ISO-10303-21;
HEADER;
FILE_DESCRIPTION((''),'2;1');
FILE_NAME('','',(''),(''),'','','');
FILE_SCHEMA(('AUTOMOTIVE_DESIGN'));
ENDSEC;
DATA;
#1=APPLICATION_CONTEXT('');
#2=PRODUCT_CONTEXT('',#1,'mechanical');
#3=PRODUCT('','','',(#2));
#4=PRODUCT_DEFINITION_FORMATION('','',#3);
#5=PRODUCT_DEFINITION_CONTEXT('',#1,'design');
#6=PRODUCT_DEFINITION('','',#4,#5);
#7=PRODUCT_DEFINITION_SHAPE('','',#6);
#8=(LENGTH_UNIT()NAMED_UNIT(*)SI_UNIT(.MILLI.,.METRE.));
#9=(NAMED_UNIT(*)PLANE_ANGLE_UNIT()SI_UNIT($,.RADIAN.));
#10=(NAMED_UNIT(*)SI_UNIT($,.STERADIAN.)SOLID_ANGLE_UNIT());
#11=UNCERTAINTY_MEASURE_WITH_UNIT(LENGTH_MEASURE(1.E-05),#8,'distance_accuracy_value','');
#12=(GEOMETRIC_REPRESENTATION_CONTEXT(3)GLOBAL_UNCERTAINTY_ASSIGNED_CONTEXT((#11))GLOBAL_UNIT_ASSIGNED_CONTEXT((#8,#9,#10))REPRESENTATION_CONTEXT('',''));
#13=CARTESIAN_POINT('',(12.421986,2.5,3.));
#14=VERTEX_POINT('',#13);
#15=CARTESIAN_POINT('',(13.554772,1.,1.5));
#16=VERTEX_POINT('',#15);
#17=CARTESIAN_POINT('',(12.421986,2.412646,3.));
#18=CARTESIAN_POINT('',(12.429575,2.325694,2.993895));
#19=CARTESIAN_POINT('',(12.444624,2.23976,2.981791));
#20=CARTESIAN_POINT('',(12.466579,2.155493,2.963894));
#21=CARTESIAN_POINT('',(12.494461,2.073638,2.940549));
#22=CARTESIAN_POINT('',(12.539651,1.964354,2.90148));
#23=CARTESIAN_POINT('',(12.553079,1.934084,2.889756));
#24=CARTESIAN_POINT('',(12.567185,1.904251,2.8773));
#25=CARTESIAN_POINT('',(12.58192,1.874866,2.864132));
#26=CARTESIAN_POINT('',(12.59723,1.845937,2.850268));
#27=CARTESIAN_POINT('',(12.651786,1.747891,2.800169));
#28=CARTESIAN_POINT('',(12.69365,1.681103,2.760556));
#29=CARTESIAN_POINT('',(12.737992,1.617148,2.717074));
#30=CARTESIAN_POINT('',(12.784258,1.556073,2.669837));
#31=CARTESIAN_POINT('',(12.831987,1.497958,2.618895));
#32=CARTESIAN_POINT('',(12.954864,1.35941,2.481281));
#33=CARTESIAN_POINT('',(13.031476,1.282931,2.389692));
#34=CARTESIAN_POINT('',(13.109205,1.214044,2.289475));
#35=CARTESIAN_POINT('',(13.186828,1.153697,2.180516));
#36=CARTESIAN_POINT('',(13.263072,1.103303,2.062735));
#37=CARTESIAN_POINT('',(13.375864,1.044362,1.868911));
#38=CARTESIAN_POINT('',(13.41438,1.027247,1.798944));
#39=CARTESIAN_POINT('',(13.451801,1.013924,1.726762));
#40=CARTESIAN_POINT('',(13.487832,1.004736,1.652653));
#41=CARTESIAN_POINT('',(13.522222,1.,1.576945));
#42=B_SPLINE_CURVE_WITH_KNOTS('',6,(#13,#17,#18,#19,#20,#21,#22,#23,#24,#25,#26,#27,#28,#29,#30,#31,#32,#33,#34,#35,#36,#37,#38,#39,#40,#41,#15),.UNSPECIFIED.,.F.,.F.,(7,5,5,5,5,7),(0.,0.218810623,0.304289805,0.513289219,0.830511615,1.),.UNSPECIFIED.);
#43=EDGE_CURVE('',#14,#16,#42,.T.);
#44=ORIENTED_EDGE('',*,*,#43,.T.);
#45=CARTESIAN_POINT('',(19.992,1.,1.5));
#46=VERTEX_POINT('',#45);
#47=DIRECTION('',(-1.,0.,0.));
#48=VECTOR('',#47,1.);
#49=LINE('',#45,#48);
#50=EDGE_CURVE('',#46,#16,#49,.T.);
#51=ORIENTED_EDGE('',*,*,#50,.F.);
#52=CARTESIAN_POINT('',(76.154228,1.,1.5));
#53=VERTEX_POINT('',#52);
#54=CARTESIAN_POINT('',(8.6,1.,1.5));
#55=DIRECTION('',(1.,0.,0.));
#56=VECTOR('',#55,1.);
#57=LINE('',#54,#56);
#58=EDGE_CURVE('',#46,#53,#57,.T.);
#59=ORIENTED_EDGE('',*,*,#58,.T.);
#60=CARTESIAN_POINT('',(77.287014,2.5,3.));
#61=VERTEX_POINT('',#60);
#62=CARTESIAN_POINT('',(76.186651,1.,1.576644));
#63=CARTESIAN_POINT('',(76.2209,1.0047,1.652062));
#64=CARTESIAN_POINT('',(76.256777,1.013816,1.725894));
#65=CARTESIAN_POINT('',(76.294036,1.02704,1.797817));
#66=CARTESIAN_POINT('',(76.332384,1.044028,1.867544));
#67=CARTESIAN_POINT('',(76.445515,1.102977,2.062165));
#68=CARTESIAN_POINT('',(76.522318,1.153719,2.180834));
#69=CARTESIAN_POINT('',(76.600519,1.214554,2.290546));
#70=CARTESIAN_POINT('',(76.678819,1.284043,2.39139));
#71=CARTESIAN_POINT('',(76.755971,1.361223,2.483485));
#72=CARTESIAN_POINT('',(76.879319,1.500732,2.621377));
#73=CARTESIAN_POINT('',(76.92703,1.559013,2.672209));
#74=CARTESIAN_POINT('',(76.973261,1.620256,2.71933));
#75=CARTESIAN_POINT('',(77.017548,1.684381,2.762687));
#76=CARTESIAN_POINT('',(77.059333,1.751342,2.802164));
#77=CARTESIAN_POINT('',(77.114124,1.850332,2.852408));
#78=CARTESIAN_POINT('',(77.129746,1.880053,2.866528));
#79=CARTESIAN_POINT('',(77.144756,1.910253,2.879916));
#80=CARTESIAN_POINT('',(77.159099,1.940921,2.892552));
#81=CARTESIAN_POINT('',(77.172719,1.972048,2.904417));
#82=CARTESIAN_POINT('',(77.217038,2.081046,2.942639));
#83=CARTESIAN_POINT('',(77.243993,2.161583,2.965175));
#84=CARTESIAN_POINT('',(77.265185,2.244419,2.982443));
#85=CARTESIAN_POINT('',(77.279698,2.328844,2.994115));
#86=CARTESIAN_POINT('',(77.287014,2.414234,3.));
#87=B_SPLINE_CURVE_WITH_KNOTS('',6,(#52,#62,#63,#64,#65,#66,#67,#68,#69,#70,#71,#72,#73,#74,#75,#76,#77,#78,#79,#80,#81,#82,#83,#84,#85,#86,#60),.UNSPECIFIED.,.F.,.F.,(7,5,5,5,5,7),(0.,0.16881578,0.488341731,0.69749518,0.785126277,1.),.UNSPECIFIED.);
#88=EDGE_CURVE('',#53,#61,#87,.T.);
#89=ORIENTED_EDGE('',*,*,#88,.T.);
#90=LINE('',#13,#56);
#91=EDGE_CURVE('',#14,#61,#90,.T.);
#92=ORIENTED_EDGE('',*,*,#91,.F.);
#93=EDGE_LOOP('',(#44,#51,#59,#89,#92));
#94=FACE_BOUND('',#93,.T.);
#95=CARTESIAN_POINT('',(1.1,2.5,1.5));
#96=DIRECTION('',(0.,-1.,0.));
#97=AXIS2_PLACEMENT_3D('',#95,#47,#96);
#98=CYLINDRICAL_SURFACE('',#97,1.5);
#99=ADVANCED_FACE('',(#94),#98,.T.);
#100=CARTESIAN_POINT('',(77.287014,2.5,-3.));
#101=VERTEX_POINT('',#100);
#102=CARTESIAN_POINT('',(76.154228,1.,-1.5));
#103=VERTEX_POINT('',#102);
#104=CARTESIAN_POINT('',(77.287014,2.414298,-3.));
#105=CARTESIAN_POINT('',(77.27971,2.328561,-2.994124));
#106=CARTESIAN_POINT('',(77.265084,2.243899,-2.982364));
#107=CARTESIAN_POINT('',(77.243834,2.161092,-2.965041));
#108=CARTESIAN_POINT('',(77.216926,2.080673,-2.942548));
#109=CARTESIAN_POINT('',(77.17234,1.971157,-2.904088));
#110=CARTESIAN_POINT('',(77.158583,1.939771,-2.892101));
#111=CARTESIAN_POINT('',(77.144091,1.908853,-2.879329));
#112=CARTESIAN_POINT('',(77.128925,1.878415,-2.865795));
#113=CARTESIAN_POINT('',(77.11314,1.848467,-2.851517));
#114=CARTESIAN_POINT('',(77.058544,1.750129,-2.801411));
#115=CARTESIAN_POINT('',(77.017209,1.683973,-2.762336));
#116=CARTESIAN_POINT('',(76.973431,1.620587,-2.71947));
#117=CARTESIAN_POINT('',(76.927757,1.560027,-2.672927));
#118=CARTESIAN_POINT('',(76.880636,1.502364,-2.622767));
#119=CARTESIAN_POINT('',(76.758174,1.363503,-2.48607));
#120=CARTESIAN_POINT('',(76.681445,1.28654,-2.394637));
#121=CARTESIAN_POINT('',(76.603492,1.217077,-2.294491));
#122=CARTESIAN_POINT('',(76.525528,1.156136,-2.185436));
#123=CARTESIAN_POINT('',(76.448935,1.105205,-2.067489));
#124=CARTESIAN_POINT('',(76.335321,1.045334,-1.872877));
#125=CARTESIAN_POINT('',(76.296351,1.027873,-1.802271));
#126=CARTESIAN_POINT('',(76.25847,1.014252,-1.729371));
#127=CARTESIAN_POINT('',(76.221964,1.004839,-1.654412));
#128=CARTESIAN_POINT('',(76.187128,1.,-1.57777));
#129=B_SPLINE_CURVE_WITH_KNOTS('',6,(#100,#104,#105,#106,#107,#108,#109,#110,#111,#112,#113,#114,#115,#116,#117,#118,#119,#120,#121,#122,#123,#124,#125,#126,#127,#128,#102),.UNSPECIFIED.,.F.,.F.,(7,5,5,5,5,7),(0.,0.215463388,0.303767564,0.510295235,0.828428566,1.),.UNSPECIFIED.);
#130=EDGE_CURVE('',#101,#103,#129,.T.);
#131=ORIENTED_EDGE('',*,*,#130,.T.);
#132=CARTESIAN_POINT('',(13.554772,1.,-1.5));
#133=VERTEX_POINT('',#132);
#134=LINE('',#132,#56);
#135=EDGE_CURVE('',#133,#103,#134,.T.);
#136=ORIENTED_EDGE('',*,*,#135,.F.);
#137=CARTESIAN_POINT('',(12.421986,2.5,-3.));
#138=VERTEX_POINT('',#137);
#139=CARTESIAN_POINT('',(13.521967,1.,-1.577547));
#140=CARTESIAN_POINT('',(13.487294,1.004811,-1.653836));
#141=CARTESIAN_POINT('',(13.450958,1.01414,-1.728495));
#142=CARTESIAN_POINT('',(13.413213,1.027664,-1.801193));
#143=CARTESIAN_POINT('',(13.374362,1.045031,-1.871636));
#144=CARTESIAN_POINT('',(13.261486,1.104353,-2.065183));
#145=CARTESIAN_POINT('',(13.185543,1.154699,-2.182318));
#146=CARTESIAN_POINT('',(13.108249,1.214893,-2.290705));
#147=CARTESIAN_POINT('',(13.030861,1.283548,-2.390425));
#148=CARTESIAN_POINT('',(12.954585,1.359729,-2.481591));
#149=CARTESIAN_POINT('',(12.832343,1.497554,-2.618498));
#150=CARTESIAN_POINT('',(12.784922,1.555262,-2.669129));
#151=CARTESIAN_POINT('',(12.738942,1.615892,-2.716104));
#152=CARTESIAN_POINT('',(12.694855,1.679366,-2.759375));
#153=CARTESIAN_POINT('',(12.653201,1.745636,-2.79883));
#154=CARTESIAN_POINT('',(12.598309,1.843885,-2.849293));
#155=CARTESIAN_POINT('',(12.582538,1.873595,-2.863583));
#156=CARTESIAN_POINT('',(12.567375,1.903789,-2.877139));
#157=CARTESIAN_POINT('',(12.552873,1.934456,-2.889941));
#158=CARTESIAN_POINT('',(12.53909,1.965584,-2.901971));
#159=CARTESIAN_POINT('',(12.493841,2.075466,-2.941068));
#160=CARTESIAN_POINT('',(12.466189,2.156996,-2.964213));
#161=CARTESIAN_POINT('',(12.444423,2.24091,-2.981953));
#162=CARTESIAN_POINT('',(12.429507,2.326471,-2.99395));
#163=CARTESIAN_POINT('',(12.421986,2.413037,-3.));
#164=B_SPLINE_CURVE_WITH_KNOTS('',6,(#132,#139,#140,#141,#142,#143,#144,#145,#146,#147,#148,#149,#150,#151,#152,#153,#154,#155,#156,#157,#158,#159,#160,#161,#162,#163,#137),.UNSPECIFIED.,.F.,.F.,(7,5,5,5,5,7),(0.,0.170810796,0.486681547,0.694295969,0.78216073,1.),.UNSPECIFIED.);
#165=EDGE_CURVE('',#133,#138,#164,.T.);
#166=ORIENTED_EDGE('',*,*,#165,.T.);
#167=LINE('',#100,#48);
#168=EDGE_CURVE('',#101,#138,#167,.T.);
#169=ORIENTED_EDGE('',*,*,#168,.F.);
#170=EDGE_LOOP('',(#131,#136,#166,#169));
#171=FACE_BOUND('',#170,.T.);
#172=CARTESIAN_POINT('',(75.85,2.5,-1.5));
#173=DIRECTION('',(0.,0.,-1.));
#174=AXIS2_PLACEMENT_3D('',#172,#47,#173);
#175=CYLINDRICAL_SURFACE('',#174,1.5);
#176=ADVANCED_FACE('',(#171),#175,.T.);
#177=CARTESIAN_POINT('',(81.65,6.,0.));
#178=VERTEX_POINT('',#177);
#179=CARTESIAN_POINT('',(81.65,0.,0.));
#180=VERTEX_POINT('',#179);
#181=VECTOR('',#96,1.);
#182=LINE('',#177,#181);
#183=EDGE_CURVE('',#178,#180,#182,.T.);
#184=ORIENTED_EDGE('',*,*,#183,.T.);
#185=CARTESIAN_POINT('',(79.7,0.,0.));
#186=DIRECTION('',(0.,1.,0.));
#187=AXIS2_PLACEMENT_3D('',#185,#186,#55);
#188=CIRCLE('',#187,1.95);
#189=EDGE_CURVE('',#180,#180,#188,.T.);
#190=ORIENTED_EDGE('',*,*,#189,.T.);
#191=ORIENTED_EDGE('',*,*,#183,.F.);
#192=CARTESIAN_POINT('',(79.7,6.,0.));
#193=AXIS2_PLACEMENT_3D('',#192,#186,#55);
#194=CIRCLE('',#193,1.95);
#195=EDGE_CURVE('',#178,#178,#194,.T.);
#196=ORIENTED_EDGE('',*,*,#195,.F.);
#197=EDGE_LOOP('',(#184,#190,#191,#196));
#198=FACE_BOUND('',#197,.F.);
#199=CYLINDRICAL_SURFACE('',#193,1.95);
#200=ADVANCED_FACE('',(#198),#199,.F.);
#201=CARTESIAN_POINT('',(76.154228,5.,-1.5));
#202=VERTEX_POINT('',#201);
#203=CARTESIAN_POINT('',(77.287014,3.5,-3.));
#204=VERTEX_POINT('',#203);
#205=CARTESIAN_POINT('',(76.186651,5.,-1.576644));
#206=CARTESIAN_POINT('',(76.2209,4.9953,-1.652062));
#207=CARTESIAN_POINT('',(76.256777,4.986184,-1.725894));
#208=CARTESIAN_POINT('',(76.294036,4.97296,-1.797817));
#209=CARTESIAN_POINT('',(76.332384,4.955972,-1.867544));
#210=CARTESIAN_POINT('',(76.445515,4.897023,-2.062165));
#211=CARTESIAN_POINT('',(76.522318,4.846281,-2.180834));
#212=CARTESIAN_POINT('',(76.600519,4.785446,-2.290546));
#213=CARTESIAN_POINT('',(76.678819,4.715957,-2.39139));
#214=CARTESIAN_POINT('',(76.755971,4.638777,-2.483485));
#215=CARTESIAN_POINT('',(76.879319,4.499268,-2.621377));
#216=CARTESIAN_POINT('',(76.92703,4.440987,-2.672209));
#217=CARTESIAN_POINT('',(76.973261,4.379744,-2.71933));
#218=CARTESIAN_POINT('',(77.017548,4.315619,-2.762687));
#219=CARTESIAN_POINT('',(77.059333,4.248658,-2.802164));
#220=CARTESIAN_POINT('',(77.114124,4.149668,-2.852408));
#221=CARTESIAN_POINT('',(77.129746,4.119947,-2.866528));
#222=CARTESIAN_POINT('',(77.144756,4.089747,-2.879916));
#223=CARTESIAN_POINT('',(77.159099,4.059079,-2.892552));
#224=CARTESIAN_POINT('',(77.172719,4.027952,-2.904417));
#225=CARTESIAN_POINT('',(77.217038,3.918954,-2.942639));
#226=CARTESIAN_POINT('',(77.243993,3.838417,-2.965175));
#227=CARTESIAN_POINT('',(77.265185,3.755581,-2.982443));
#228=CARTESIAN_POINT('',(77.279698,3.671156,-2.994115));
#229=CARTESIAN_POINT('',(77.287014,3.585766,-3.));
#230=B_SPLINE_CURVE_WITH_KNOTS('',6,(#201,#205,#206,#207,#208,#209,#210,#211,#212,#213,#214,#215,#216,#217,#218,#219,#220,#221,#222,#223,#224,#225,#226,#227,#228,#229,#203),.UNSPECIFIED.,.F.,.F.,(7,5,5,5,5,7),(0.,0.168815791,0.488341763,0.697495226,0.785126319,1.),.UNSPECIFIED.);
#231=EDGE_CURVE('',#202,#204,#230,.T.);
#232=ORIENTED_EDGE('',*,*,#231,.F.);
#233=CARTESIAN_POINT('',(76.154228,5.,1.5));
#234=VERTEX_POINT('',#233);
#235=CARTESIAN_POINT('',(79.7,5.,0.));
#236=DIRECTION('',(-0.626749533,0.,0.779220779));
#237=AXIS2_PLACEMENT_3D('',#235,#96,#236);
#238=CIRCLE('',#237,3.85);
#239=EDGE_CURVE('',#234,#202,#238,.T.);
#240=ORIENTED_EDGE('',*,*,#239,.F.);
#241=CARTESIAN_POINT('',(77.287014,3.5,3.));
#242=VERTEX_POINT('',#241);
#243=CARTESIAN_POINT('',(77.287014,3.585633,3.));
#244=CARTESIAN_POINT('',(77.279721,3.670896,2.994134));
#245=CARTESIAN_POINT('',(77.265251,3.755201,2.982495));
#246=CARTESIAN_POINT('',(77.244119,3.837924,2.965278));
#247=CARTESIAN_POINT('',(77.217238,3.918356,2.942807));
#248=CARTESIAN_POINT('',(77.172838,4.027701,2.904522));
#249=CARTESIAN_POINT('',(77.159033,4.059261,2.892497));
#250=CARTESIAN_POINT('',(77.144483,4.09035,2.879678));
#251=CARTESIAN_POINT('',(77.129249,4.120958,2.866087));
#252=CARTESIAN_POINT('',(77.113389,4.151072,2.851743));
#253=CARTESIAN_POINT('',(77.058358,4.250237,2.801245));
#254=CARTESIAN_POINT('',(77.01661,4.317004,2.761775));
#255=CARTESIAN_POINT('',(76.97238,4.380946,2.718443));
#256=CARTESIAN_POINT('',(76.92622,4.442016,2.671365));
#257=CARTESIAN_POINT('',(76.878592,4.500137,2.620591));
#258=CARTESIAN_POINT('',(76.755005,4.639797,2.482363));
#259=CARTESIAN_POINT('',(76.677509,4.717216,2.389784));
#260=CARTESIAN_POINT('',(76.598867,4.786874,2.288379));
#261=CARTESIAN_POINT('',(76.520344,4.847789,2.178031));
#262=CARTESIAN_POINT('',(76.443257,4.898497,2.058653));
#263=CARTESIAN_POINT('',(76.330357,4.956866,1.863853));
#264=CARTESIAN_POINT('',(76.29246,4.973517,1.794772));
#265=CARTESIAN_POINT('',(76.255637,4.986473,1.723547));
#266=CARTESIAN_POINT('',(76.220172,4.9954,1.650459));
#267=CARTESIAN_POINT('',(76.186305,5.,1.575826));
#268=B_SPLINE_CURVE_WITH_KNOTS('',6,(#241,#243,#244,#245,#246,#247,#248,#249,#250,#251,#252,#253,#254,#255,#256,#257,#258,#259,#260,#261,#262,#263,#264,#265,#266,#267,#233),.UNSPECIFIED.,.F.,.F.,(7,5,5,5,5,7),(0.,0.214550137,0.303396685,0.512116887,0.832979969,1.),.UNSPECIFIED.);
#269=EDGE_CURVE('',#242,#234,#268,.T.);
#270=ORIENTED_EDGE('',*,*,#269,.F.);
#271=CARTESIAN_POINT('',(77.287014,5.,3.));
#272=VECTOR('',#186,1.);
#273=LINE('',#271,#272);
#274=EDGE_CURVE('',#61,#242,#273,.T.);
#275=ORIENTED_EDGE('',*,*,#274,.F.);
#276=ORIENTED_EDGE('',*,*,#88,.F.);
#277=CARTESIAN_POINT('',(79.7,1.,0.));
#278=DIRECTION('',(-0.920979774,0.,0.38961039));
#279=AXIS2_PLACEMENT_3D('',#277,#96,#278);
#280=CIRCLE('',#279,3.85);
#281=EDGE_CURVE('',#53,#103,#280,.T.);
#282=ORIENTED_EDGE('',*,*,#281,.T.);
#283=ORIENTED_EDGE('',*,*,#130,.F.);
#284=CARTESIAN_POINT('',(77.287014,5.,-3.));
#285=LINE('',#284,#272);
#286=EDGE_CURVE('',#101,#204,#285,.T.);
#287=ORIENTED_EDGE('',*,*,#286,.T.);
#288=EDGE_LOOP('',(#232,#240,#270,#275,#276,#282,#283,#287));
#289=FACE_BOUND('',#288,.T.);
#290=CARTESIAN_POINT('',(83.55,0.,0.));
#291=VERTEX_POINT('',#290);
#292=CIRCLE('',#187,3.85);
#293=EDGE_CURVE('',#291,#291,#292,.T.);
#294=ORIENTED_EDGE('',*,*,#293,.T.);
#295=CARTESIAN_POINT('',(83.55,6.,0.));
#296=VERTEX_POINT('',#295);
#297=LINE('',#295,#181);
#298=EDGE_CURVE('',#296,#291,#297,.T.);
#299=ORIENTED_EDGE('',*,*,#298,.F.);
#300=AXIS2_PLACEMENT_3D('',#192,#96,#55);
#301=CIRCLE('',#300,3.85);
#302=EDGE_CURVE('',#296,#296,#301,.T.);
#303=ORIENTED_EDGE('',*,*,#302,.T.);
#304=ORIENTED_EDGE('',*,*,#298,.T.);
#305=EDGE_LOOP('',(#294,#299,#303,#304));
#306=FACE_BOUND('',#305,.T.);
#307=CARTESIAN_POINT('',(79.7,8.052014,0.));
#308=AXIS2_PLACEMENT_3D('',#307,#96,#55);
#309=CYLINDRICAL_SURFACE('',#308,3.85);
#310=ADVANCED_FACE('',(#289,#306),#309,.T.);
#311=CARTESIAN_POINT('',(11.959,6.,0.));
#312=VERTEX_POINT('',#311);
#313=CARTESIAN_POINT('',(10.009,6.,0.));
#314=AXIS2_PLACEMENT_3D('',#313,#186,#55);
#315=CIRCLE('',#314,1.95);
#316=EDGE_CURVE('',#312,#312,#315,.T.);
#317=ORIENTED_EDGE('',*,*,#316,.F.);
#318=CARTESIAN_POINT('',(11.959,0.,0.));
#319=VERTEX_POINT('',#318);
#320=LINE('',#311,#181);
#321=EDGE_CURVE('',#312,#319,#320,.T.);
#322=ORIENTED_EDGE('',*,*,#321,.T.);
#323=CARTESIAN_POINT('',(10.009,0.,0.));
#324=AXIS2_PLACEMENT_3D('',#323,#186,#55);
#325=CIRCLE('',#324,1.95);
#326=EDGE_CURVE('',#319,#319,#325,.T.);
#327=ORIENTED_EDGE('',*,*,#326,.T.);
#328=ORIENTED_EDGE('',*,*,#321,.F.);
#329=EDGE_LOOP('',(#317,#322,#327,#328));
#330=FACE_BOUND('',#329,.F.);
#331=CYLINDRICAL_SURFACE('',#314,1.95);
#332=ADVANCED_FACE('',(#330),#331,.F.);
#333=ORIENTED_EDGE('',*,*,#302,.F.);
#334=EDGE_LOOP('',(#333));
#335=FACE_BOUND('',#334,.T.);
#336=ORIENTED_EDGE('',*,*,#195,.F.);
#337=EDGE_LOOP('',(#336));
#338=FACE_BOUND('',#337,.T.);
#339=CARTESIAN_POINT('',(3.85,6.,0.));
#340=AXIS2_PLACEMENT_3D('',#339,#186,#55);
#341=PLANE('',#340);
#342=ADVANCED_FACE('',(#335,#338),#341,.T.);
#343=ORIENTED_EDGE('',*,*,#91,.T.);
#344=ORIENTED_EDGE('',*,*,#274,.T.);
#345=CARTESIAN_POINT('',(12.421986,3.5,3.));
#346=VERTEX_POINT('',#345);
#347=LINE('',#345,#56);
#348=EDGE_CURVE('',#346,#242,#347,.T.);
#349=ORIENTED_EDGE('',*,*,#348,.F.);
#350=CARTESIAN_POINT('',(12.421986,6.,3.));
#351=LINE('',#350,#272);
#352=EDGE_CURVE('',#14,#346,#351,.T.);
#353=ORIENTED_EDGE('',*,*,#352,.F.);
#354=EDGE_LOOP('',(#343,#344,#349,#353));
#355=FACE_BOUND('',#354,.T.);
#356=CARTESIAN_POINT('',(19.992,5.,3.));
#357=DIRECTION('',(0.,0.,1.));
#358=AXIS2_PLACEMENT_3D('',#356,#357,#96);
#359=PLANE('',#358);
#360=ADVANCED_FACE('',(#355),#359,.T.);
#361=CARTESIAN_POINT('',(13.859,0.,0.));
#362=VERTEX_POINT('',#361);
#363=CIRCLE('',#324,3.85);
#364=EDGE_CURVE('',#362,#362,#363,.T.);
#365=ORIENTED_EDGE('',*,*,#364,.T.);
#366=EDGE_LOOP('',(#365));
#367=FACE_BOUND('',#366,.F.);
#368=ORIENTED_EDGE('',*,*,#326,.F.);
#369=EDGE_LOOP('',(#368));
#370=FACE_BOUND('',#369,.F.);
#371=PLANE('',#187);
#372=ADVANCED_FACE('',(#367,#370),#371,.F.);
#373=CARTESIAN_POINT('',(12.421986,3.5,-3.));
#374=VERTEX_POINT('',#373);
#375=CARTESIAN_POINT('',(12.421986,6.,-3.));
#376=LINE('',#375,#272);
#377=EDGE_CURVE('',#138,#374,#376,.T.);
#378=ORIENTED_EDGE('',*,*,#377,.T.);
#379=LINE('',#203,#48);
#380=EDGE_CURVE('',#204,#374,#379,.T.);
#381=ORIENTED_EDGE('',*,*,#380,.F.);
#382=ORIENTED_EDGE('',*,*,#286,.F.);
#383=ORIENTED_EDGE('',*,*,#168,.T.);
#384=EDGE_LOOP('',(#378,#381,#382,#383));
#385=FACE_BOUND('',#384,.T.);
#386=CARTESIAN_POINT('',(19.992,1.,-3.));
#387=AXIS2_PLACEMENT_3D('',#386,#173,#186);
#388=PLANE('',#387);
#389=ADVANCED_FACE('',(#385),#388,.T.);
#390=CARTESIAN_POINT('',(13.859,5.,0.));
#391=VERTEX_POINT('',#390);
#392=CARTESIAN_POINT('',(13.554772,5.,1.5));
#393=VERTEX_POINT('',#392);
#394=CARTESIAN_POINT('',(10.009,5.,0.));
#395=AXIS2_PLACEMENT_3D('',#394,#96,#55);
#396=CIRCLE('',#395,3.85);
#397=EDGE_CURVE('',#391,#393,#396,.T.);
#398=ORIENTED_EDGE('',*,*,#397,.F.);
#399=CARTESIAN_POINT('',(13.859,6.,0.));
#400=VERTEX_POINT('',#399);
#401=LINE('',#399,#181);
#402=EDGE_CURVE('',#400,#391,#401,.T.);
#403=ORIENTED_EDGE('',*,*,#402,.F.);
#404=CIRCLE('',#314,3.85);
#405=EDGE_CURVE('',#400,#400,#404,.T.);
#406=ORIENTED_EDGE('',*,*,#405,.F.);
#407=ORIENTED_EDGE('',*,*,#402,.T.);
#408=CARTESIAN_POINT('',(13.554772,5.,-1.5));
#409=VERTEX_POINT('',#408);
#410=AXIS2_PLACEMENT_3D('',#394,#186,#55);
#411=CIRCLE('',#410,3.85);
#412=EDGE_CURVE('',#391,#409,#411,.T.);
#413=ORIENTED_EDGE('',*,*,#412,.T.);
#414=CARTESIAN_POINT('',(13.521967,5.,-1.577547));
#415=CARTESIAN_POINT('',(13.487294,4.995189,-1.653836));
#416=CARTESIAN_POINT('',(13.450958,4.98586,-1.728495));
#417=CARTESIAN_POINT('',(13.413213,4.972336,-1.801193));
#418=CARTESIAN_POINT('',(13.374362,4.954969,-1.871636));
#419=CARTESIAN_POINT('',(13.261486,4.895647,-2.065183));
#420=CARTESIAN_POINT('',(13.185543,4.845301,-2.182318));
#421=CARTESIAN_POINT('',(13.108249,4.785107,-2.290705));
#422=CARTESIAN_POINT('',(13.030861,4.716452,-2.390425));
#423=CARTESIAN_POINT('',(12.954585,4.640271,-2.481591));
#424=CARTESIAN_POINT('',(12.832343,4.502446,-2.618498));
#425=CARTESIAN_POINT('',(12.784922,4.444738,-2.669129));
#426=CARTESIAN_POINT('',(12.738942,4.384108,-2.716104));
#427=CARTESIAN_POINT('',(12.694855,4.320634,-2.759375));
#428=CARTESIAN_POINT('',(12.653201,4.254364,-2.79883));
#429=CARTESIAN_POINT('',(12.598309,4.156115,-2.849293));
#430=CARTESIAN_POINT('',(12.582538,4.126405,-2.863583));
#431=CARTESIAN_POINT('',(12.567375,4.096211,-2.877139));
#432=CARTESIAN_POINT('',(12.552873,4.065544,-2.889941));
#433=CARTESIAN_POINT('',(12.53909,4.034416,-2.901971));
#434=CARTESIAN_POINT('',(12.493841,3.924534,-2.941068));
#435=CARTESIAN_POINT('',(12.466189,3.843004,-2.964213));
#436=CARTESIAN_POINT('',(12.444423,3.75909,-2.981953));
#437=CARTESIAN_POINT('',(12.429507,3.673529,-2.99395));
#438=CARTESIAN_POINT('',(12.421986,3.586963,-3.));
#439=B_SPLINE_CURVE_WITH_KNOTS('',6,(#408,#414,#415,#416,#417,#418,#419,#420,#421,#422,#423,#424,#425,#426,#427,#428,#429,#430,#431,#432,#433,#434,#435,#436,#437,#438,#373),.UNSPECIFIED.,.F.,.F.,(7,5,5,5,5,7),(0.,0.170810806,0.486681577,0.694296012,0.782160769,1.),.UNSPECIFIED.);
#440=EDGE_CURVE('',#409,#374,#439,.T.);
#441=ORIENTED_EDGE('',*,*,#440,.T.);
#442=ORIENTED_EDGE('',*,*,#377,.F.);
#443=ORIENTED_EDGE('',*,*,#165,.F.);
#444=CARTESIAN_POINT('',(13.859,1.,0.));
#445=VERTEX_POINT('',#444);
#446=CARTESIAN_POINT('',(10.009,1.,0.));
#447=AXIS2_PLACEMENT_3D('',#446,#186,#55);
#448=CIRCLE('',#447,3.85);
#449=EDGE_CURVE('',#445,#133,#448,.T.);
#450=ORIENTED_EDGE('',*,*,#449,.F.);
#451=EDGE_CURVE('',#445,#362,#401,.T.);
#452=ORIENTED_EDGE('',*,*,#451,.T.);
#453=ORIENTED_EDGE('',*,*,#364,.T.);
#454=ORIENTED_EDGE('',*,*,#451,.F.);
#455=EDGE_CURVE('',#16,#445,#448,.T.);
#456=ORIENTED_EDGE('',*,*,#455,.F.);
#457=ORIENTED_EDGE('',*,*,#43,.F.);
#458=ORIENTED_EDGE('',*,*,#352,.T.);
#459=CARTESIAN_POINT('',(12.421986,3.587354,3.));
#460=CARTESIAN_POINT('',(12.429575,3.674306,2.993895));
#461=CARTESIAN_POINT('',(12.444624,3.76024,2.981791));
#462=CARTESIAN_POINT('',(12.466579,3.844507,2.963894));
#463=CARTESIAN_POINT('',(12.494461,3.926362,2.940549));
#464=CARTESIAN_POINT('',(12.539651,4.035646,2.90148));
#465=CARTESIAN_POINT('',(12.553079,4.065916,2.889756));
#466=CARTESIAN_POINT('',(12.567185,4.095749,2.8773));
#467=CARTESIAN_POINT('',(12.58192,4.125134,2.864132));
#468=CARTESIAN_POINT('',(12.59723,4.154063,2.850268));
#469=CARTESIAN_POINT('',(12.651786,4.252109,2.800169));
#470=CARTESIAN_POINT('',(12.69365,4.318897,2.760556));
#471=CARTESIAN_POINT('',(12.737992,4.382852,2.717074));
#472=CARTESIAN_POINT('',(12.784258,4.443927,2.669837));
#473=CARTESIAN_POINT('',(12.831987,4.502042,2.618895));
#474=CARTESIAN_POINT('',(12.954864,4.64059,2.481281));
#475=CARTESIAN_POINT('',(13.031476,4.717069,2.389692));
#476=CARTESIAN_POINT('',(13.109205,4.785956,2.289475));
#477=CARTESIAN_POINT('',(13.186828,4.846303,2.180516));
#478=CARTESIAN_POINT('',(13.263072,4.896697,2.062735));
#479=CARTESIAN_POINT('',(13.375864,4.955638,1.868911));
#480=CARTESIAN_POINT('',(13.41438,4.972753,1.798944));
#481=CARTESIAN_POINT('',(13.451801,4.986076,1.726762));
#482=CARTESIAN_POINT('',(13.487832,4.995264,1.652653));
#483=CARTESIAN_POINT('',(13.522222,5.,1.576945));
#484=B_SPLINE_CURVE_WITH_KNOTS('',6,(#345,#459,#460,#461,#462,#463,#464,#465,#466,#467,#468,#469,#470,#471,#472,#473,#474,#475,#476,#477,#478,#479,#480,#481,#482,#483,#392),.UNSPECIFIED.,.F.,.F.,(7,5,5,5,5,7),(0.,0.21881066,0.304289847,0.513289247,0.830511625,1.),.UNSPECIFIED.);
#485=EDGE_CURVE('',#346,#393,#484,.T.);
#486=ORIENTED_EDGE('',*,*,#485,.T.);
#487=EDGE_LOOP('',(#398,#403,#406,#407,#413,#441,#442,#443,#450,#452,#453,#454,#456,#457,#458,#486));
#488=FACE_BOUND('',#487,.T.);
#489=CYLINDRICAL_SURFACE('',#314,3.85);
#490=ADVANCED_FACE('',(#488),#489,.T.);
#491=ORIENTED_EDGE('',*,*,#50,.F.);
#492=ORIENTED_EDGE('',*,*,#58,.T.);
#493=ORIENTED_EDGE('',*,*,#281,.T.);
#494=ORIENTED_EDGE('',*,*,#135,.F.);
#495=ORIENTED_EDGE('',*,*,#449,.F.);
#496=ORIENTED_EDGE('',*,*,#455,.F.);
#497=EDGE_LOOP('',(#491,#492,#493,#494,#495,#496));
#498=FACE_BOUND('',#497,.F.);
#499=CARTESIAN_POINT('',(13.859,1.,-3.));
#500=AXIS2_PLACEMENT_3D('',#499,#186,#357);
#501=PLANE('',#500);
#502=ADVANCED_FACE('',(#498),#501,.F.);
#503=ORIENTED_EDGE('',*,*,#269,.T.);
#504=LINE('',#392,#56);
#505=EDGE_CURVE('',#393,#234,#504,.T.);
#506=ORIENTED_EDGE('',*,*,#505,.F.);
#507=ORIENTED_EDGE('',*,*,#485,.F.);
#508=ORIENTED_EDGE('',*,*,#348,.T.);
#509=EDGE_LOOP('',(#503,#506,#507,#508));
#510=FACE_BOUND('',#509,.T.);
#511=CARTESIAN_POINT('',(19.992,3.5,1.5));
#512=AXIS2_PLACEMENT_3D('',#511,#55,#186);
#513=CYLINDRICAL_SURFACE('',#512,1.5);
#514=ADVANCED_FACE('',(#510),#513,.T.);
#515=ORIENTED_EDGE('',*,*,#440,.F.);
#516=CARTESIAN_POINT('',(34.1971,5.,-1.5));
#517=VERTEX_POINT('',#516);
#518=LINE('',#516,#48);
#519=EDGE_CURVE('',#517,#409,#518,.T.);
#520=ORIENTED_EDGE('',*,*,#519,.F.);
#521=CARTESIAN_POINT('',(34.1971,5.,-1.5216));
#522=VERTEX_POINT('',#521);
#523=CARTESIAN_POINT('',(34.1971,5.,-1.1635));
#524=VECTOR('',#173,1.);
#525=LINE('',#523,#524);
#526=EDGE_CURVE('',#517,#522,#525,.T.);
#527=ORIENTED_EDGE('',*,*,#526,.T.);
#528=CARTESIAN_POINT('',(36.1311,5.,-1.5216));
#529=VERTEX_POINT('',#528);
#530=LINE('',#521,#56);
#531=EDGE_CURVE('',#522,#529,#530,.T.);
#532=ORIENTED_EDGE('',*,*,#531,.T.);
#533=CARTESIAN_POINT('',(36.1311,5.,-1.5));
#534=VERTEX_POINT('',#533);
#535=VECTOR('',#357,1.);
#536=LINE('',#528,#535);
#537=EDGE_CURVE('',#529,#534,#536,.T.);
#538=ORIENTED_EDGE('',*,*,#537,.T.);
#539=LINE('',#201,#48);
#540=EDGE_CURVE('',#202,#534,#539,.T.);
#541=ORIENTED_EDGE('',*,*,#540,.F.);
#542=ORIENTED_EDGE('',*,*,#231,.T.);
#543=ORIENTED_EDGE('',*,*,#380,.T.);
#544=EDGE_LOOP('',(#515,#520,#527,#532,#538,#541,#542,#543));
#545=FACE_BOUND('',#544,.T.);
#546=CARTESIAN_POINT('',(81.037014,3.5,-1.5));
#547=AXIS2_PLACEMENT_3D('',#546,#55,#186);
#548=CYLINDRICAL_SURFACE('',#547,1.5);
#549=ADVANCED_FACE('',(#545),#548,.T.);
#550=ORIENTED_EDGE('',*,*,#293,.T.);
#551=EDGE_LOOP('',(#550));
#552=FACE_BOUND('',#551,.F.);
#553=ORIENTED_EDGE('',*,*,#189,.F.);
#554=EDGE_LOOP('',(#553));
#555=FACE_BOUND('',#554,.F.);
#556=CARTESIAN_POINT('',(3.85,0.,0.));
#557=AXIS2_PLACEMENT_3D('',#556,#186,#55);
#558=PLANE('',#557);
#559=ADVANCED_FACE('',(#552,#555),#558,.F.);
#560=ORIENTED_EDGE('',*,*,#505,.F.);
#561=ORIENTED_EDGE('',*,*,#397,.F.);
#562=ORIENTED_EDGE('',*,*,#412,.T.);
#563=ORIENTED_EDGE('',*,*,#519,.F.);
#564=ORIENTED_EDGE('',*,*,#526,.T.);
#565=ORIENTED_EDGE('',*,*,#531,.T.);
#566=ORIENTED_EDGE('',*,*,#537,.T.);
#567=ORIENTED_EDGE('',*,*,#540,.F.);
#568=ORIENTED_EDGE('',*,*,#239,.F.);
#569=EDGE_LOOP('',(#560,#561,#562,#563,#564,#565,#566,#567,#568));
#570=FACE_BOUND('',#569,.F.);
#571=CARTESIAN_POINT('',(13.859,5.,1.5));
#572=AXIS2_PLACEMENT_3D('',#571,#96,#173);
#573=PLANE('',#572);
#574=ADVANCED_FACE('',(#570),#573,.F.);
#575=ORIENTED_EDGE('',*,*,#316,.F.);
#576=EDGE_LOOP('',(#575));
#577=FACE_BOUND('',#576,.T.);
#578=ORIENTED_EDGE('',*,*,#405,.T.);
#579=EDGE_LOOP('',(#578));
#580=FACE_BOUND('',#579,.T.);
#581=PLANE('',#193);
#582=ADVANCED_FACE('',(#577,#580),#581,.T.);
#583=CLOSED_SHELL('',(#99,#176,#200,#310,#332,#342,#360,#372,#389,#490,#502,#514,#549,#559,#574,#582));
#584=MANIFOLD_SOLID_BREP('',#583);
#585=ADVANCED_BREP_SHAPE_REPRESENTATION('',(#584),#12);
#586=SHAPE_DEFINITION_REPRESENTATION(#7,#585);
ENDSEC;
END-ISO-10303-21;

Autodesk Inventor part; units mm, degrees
ref_plane "YZ Plane" through (0, 0, 0) normal (1, 0, 0) x (0, 1, 0)
ref_plane "XZ Plane" through (0, 0, 0) normal (0, 1, 0) x (-1, 0, 0)
ref_plane "XY Plane" through (0, 0, 0) normal (0, 0, 1) x (1, 0, 0)
sketch "Sketch1" plane through (0, 0, 0) normal (0, 1, 0) x (-1, 0, 0)
  point P0 (0, 0)
sketch "Sketch2" plane through (0, 0, 0) normal (0, 1, 0) x (-1, 0, 0)
  circle A0 centre (0, 0) radius 3.85
  dimension "d0" = 7.7
extrude "Extrusion1" add sketch "Sketch2" along normal blind 6
sketch "Sketch3" plane through (0, 6, 0) normal (0, 1, 0) x (1, 0, 0)
  circle A0 centre (0, 0) radius 1
  dimension "d3" = 2
extrude "Extrusion2" cut sketch "Sketch3" against normal through all
sketch "Sketch4" plane through (0, 0, 0) normal (0, -1, 0) x (1, 0, 0)
  circle A0 centre (0, 0) radius 3.85 projected
  line L0 (0, 3.85) -> (3.85, 3.85)
  line L1 (3.85, 3.85) -> (3.85, -3.85)
  line L2 (3.85, -3.85) -> (0, -3.85)
  line L3 (3.85, 3.85) -> (4.85, 3.85)
  line L4 (4.85, 3.85) -> (4.85, -3.85)
  line L5 (4.85, -3.85) -> (3.85, -3.85)
  line L6 (3.85, -3.85) -> (3.85, 3.85)
  line L7 (4.85, 3.85) -> (4.85, 3)
  line L8 (4.85, -3.85) -> (4.85, -3)
  line L9 (4.85, 3) -> (3.85, 3)
  line L10 (3.85, 3) -> (3.85, -3)
  line L11 (3.85, -3) -> (4.85, -3)
  line L12 (4.85, -3) -> (4.85, 3)
  point P0 (3.85, -3)
  dimension "d6" = 1
  dimension "d7" = 0.85
  dimension "d8" = 0.85
extrude "Extrusion3" add sketch "Sketch4" against normal blind 6 contours L1 L9 L4 L11
sketch "Sketch5" plane through (4.85, 0, 3) normal (1, 0, 0) x (0, 0, -1)
  line L0 (6.85, 0) -> (-0.85, 0) projected
  line L1 (6, 0) -> (6, 6) projected
  line L2 (0.0003, 0) -> (6, 0)
  line L3 (6, 0) -> (6, 1)
  line L4 (6, 1) -> (0.0003, 1)
  line L5 (0.0003, 1) -> (0.0003, 0)
  line L6 (6.85, 6) -> (-0.85, 6) projected
  line L7 (0.0003, 6) -> (6, 6)
  line L8 (6, 6) -> (6, 5)
  line L9 (6, 5) -> (0.0003, 5)
  line L10 (0.0003, 5) -> (0.0003, 6)
  point P0 (3, 0)
  point P1 (3, 6)
  dimension "d11" = 1
  dimension "d12" = 1
extrude "Extrusion4" cut sketch "Sketch5" against normal blind 1 contours L9 L10 L6 L1
extrude "Extrusion5" cut sketch "Sketch5" against normal blind 1 contours L0 L5 L4 L1
sketch "Sketch6" plane through (4.85, 5, 2.9997) normal (0, 0, -1) x (-1, 0, 0)
  line L0 (0, 0) -> (1, 0) projected
  line L1 (0, -5) -> (0, 1) projected
  line L2 (1, 0) -> (0, 0)
  line L3 (0, 0) -> (0, 1)
  line L4 (0, 1) -> (1, 1)
  line L5 (1, 1) -> (1, 0)
  line L6 (1, -5) -> (0, -5)
  line L7 (0, -5) -> (0, -3.9916)
  line L8 (0, -3.9916) -> (1, -3.9916)
  line L9 (1, -3.9916) -> (1, -5)
  point P0 (4.85, -5)
extrude "Extrusion6" cut sketch "Sketch6" against normal through all contours L1 L4 L5 L0
extrude "Extrusion7" cut sketch "Sketch6" against normal through all contours L1 L8 L9 L6
sketch "Sketch7" plane through (4.85, 5, 3) normal (1, 0, 0) x (0, 0, -1)
  line L0 (0, 0) -> (3, 0) projected
  line L1 (6, -4) -> (6, 0) projected
  line L2 (0, 0) -> (6, 0)
  line L3 (6, 0) -> (6, -4)
  line L4 (6, -4) -> (0, -4)
  line L5 (0, -4) -> (0, 0)
  point P0 (3, -5)
extrude "Extrusion8" add sketch "Sketch7" along normal blind 71
sketch "Sketch8" plane through (3.85, 1, -3) normal (0, 0, -1) x (-1, 0, 0)
  point P0 (3.85, -1)
sketch "Sketch9" plane through (3.85, 5, 0) normal (0, 1, 0) x (1, 0, 0)
  line L0 (72, 3) -> (72, -3) projected
  line L1 (72, 0) -> (75.85, 0)
  circle A0 centre (75.85, 0) radius 3.85
  point P0 (-3.85, 0)
  dimension "d23" = 3.85
extrude "Extrusion9" add sketch "Sketch9" along normal blind 1
extrude "Extrusion10" add sketch "Sketch9" against normal blind 5
sketch "Sketch10" plane through (79.7, 6, 0) normal (0, 1, 0) x (1, 0, 0)
  circle A0 centre (0, 0) radius 1.85
  point P0 (-79.7, 0)
  dimension "d28" = 3.7
extrude "Extrusion11" cut sketch "Sketch10" against normal through all
sketch "Sketch11" plane through (3.85, 5, 0) normal (-1, 0, 0) x (0, 0, 1)
  point P0 (0, -5)
sketch "Sketch12" plane through (3.85, 5, -3) normal (-1, 0, 0) x (0, 0, 1)
  line L0 (0, 0) -> (3, 0) projected
  line L1 (6, 0) -> (6, -4) projected
  line L2 (0, 0) -> (6, 0)
  line L3 (6, 0) -> (6, -4)
  line L4 (6, -4) -> (0, -4)
  line L5 (0, -4) -> (0, 0)
  point P0 (3, -5)
extrude "Extrusion12" add sketch "Sketch12" along normal blind 2
sketch "Sketch13" plane through (75.85, 5, 3) normal (1, 0, 0) x (0, 0, -1)
  line L0 (3, 0) -> (0, 0) projected
  line L1 (3, -4) -> (6, -4) projected
  line L2 (0, 0) -> (6, 0)
  line L3 (6, 0) -> (6, -4)
  line L4 (6, -4) -> (0, -4)
  line L5 (0, -4) -> (0, 0)
  point P0 (3, -5)
extrude "Extrusion13" add sketch "Sketch13" along normal blind 1.6
fillet "Fillet1" radius 1.5 2 edges at (76.5685, 5, 3) (39.1315, 5, 3)
fillet "Fillet2" radius 1.5 1 edges at (39.85, 5, -3)
fillet "Fillet3" radius 1.5 1 edges at (39.85, 1, -3)
fillet "Fillet4" radius 1.5 3 edges at (4.35, 1, 2.9997) (40.35, 1, 3) (4.85, 1, 2.9998)
sketch "Sketch14" plane through (3.5458, 5, 1.5) normal (0, 1, 0) x (1, 0, 0)
  point P0 (-3.5458, 1.5)
sketch "Sketch15" plane through (3.5458, 5, 1.5) normal (0, 1, 0) x (1, 0, 0)
  line L0 (0.4177, 2.9988) -> (2.9717, 2.9988) construction
  line L1 (2.9717, 2.9988) -> (2.9717, -0.0492) construction
  line L2 (2.9717, -0.0492) -> (0.4177, -0.0492) construction
  line L3 (0.4177, -0.0492) -> (0.4177, 2.9988) construction
  line L4 (0.398, -0.0492) -> (1.4255, 2.9988)
  line L5 (1.4255, 2.9988) -> (1.9244, 2.9988)
  line L6 (1.9244, 2.9988) -> (2.952, -0.0492)
  line L7 (2.952, -0.0492) -> (2.5247, -0.0492)
  line L8 (2.5247, -0.0492) -> (2.248, 0.803)
  line L9 (2.248, 0.803) -> (1.0846, 0.803)
  line L10 (1.0846, 0.803) -> (0.808, -0.0492)
  line L11 (0.808, -0.0492) -> (0.398, -0.0492)
  line L12 (2.1369, 1.1488) -> (1.6651, 2.5839)
  line L13 (1.6651, 2.5839) -> (1.1958, 1.1488)
  line L14 (1.1958, 1.1488) -> (2.1369, 1.1488)
  point P0 (-3.5458, 1.5)
extrude "Extrusion14" add sketch "Sketch15" along normal blind 0.2
sketch "Sketch16" plane through (3.5458, 5, -1.5) normal (0, 1, 0) x (1, 0, 0)
  line L0 (69.8363, -0.0038) -> (72.3064, -0.0038) construction
  line L1 (72.3064, -0.0038) -> (72.3064, -3.0518) construction
  line L2 (72.3064, -3.0518) -> (69.8363, -3.0518) construction
  line L3 (69.8363, -3.0518) -> (69.8363, -0.0038) construction
  spline S0 degree 2 poles (72.2125, -2.1157) (72.2125, -2.3429) (72.0396, -2.6912) (71.8963, -2.8048) knots 0 0 0 1 2 2 2
  spline S1 degree 2 poles (71.8963, -2.8048) (71.7234, -2.9382) (71.3307, -3.0518) (71.0195, -3.0518) knots 0 0 0 1 2 2 2
  line L4 (71.0195, -3.0518) -> (70.1451, -3.0518)
  line L5 (70.1451, -3.0518) -> (70.1451, -0.0038)
  line L6 (70.1451, -0.0038) -> (70.9528, -0.0038)
  spline S2 degree 2 poles (70.9528, -0.0038) (71.2788, -0.0038) (71.6049, -0.0458) (71.7531, -0.1273) knots 0 0 0 1 2 2 2
  spline S3 degree 2 poles (71.7531, -0.1273) (71.9186, -0.2138) (72.0692, -0.4978) (72.0692, -0.6905) knots 0 0 0 1 2 2 2
  spline S4 degree 2 poles (72.0692, -0.6905) (72.0692, -0.9054) (71.842, -1.2462) (71.6419, -1.3426) knots 0 0 0 1 2 2 2
  line L7 (71.6419, -1.3426) -> (71.6419, -1.3574)
  spline S5 degree 2 poles (71.6419, -1.3574) (71.9136, -1.4315) (72.2125, -1.8242) (72.2125, -2.1157) knots 0 0 0 1 2 2 2
  spline S6 degree 2 poles (71.7901, -2.133) (71.7901, -1.9601) (71.6913, -1.7378) (71.5431, -1.6587) knots 0 0 0 1 2 2 2
  spline S7 degree 2 poles (71.5431, -1.6587) (71.4468, -1.6093) (71.2195, -1.5797) (71.0096, -1.5797) knots 0 0 0 1 2 2 2
  line L8 (71.0096, -1.5797) -> (70.5502, -1.5797)
  line L9 (70.5502, -1.5797) -> (70.5502, -2.706)
  line L10 (70.5502, -2.706) -> (70.8787, -2.706)
  spline S8 degree 2 poles (70.8787, -2.706) (71.1454, -2.706) (71.4517, -2.6566) (71.5703, -2.5776) knots 0 0 0 1 2 2 2
  spline S9 degree 2 poles (71.5703, -2.5776) (71.6839, -2.4961) (71.7901, -2.2935) (71.7901, -2.133) knots 0 0 0 1 2 2 2
  spline S10 degree 2 poles (71.6469, -0.7473) (71.6469, -0.6386) (71.5728, -0.4756) (71.4912, -0.4287) knots 0 0 0 1 2 2 2
  spline S11 degree 2 poles (71.4912, -0.4287) (71.3924, -0.3743) (71.1529, -0.3496) (70.938, -0.3496) knots 0 0 0 1 2 2 2
  line L11 (70.938, -0.3496) -> (70.5502, -0.3496)
  line L12 (70.5502, -0.3496) -> (70.5502, -1.2413)
  line L13 (70.5502, -1.2413) -> (71.0096, -1.2413)
  spline S12 degree 2 poles (71.0096, -1.2413) (71.1998, -1.2413) (71.3801, -1.2018) (71.4764, -1.14) knots 0 0 0 1 2 2 2
  spline S13 degree 2 poles (71.4764, -1.14) (71.5703, -1.0807) (71.6469, -0.8905) (71.6469, -0.7473) knots 0 0 0 1 2 2 2
  point P0 (-3.5458, -1.5)
extrude "Extrusion15" add sketch "Sketch16" along normal blind 0.2
sketch "Sketch17" plane through (3.5458, 5, -1.5) normal (0, 1, 0) x (1, 0, 0)
  line L0 (0.4145, -1.5) -> (36.4145, -1.5)
  line L1 (30.4487, 0.0859) -> (55.6072, 0.0859) construction
  line L2 (55.6072, 0.0859) -> (55.6072, -2.5363) construction
  line L3 (55.6072, -2.5363) -> (30.4487, -2.5363) construction
  line L4 (30.4487, -2.5363) -> (30.4487, 0.0859) construction
  line L5 (32.5853, -0.4353) -> (31.2663, -3.0264)
  line L6 (31.2663, -3.0264) -> (30.8316, -3.0264)
  line L7 (30.8316, -3.0264) -> (32.2247, -0.3365)
  line L8 (32.2247, -0.3365) -> (30.6513, -0.3365)
  line L9 (30.6513, -0.3365) -> (30.6513, 0.0216)
  line L10 (30.6513, 0.0216) -> (32.5853, 0.0216)
  line L11 (32.5853, 0.0216) -> (32.5853, -0.4353)
  line L12 (34.838, -3.0264) -> (32.9583, -3.0264)
  line L13 (32.9583, -3.0264) -> (32.9583, -2.5941)
  spline S0 degree 2 poles (32.9583, -2.5941) (33.1608, -2.4039) (33.5214, -2.0507) (33.6943, -1.8605) knots 0 0 0 1 2 2 2
  spline S1 degree 2 poles (33.6943, -1.8605) (34.0426, -1.4777) (34.297, -1.0182) (34.297, -0.7737) knots 0 0 0 1 2 2 2
  spline S2 degree 2 poles (34.297, -0.7737) (34.297, -0.6453) (34.218, -0.4526) (34.1464, -0.3909) knots 0 0 0 1 2 2 2
  spline S3 degree 2 poles (34.1464, -0.3909) (34.0747, -0.3291) (33.887, -0.2674) (33.7734, -0.2674) knots 0 0 0 1 2 2 2
  spline S4 degree 2 poles (33.7734, -0.2674) (33.6647, -0.2674) (33.4424, -0.3217) (33.3411, -0.3637) knots 0 0 0 1 2 2 2
  spline S5 degree 2 poles (33.3411, -0.3637) (33.2547, -0.3983) (33.0941, -0.4971) (33.0447, -0.5317) knots 0 0 0 1 2 2 2
  line L14 (33.0447, -0.5317) -> (33.0225, -0.5317)
  line L15 (33.0225, -0.5317) -> (33.0225, -0.0969)
  spline S6 degree 2 poles (33.0225, -0.0969) (33.1485, -0.0352) (33.6005, 0.0859) (33.803, 0.0859) knots 0 0 0 1 2 2 2
  spline S7 degree 2 poles (33.803, 0.0859) (34.2303, 0.0859) (34.712, -0.3662) (34.712, -0.7515) knots 0 0 0 1 2 2 2
  spline S8 degree 2 poles (34.712, -0.7515) (34.712, -0.9318) (34.628, -1.2331) (34.5539, -1.3616) knots 0 0 0 1 2 2 2
  spline S9 degree 2 poles (34.5539, -1.3616) (34.4798, -1.495) (34.2649, -1.7568) (34.1464, -1.8828) knots 0 0 0 1 2 2 2
  spline S10 degree 2 poles (34.1464, -1.8828) (33.9537, -2.0927) (33.4819, -2.5422) (33.3411, -2.6732) knots 0 0 0 1 2 2 2
  line L16 (33.3411, -2.6732) -> (34.838, -2.6732)
  line L17 (34.838, -2.6732) -> (34.838, -3.0264)
  line L18 (37.8958, -3.0264) -> (37.8958, -1.7024)
  spline S11 degree 2 poles (37.8958, -1.7024) (37.8958, -1.5444) (37.8711, -1.2751) (37.8316, -1.201) knots 0 0 0 1 2 2 2
  spline S12 degree 2 poles (37.8316, -1.201) (37.7921, -1.1195) (37.6414, -1.0405) (37.5105, -1.0405) knots 0 0 0 1 2 2 2
  spline S13 degree 2 poles (37.5105, -1.0405) (37.392, -1.0405) (37.1203, -1.1862) (36.977, -1.3245) knots 0 0 0 1 2 2 2
  spline S14 degree 2 poles (36.977, -1.3245) (36.9795, -1.3591) (36.9844, -1.4554) (36.9844, -1.5197) knots 0 0 0 1 2 2 2
  line L19 (36.9844, -1.5197) -> (36.9844, -3.0264)
  line L20 (36.9844, -3.0264) -> (36.5991, -3.0264)
  line L21 (36.5991, -3.0264) -> (36.5991, -1.7024)
  spline S15 degree 2 poles (36.5991, -1.7024) (36.5991, -1.5444) (36.5744, -1.2751) (36.5349, -1.201) knots 0 0 0 1 2 2 2
  spline S16 degree 2 poles (36.5349, -1.201) (36.4953, -1.1195) (36.3447, -1.0405) (36.2138, -1.0405) knots 0 0 0 1 2 2 2
  spline S17 degree 2 poles (36.2138, -1.0405) (36.0903, -1.0405) (35.8161, -1.1961) (35.6876, -1.3171) knots 0 0 0 1 2 2 2
  line L22 (35.6876, -1.3171) -> (35.6876, -3.0264)
  line L23 (35.6876, -3.0264) -> (35.3023, -3.0264)
  line L24 (35.3023, -3.0264) -> (35.3023, -0.7391)
  line L25 (35.3023, -0.7391) -> (35.6876, -0.7391)
  line L26 (35.6876, -0.7391) -> (35.6876, -0.9911)
  spline S18 degree 2 poles (35.6876, -0.9911) (35.8383, -0.8404) (36.1347, -0.6749) (36.3126, -0.6749) knots 0 0 0 1 2 2 2
  spline S19 degree 2 poles (36.3126, -0.6749) (36.5151, -0.6749) (36.8288, -0.8602) (36.9103, -1.0701) knots 0 0 0 1 2 2 2
  spline S20 degree 2 poles (36.9103, -1.0701) (37.0857, -0.875) (37.4167, -0.6749) (37.6093, -0.6749) knots 0 0 0 1 2 2 2
  spline S21 degree 2 poles (37.6093, -0.6749) (37.7575, -0.6749) (37.9996, -0.7663) (38.0885, -0.87) knots 0 0 0 1 2 2 2
  spline S22 degree 2 poles (38.0885, -0.87) (38.1799, -0.9738) (38.2812, -1.285) (38.2812, -1.5197) knots 0 0 0 1 2 2 2
  line L27 (38.2812, -1.5197) -> (38.2812, -3.0264)
  line L28 (38.2812, -3.0264) -> (37.8958, -3.0264)
  line L29 (41.4156, -3.0264) -> (41.4156, -1.7024)
  spline S23 degree 2 poles (41.4156, -1.7024) (41.4156, -1.5444) (41.3909, -1.2751) (41.3514, -1.201) knots 0 0 0 1 2 2 2
  spline S24 degree 2 poles (41.3514, -1.201) (41.3119, -1.1195) (41.1612, -1.0405) (41.0303, -1.0405) knots 0 0 0 1 2 2 2
  spline S25 degree 2 poles (41.0303, -1.0405) (40.9117, -1.0405) (40.64, -1.1862) (40.4968, -1.3245) knots 0 0 0 1 2 2 2
  spline S26 degree 2 poles (40.4968, -1.3245) (40.4992, -1.3591) (40.5042, -1.4554) (40.5042, -1.5197) knots 0 0 0 1 2 2 2
  line L30 (40.5042, -1.5197) -> (40.5042, -3.0264)
  line L31 (40.5042, -3.0264) -> (40.1189, -3.0264)
  line L32 (40.1189, -3.0264) -> (40.1189, -1.7024)
  spline S27 degree 2 poles (40.1189, -1.7024) (40.1189, -1.5444) (40.0942, -1.2751) (40.0546, -1.201) knots 0 0 0 1 2 2 2
  spline S28 degree 2 poles (40.0546, -1.201) (40.0151, -1.1195) (39.8644, -1.0405) (39.7335, -1.0405) knots 0 0 0 1 2 2 2
  spline S29 degree 2 poles (39.7335, -1.0405) (39.61, -1.0405) (39.3359, -1.1961) (39.2074, -1.3171) knots 0 0 0 1 2 2 2
  line L33 (39.2074, -1.3171) -> (39.2074, -3.0264)
  line L34 (39.2074, -3.0264) -> (38.8221, -3.0264)
  line L35 (38.8221, -3.0264) -> (38.8221, -0.7391)
  line L36 (38.8221, -0.7391) -> (39.2074, -0.7391)
  line L37 (39.2074, -0.7391) -> (39.2074, -0.9911)
  spline S30 degree 2 poles (39.2074, -0.9911) (39.3581, -0.8404) (39.6545, -0.6749) (39.8323, -0.6749) knots 0 0 0 1 2 2 2
  spline S31 degree 2 poles (39.8323, -0.6749) (40.0349, -0.6749) (40.3486, -0.8602) (40.4301, -1.0701) knots 0 0 0 1 2 2 2
  spline S32 degree 2 poles (40.4301, -1.0701) (40.6054, -0.875) (40.9364, -0.6749) (41.1291, -0.6749) knots 0 0 0 1 2 2 2
  spline S33 degree 2 poles (41.1291, -0.6749) (41.2773, -0.6749) (41.5194, -0.7663) (41.6083, -0.87) knots 0 0 0 1 2 2 2
  spline S34 degree 2 poles (41.6083, -0.87) (41.6997, -0.9738) (41.8009, -1.285) (41.8009, -1.5197) knots 0 0 0 1 2 2 2
  line L38 (41.8009, -1.5197) -> (41.8009, -3.0264)
  line L39 (41.8009, -3.0264) -> (41.4156, -3.0264)
  point P0 (-3.5458, -1.5)
  dimension "d43" = 36
extrude "Extrusion16" add sketch "Sketch17" along normal blind 0.2
sketch "Sketch18" plane through (3.5458, 5.2, -1.5) normal (0, 1, 0) x (1, 0, 0)
  line L0 (29.8828, 2.0952) -> (43.3392, 2.0952)
  line L1 (43.3392, 2.0952) -> (43.3392, -5.5663)
  line L2 (43.3392, -5.5663) -> (29.8828, -5.5663)
  line L3 (29.8828, -5.5663) -> (29.8828, 2.0952)
  point P0 (-3.5458, -1.5)
extrude "Extrusion17" cut sketch "Sketch18" against normal blind 0.2
sketch "Sketch19" plane through (3.5458, 5.2, 1.5) normal (0, 1, 0) x (1, 0, 0)
  line L0 (0.3624, -0.1736) -> (3.3783, -0.1736)
  line L1 (3.3783, -0.1736) -> (3.3783, 3.2897)
  line L2 (3.3783, 3.2897) -> (0.3624, 3.2897)
  line L3 (0.3624, 3.2897) -> (0.3624, -0.1736)
  line L4 (72.2697, -0.5369) -> (69.8008, -0.5369)
  line L5 (69.8008, -0.5369) -> (69.8008, 3.7021)
  line L6 (69.8008, 3.7021) -> (72.2697, 3.7021)
  line L7 (72.2697, 3.7021) -> (72.2697, -0.5369)
  point P0 (-3.5458, 1.5)
extrude "Extrusion18" cut sketch "Sketch19" against normal blind 0.2 contours L3 L2 L1 L0
extrude "Extrusion19" cut sketch "Sketch19" against normal blind 0.2 contours L4 L5 L6 L7
sketch "Sketch20" plane through (79.7, 0, 0) normal (0, -1, 0) x (1, 0, 0)
  point P0 (-79.7, 0)
sketch "Sketch21" plane through (79.7, 6, 0) normal (0, 1, 0) x (1, 0, 0)
  circle A0 centre (0, 0) radius 1.95
  point P0 (-79.7, 0)
  dimension "d52" = 3.9
extrude "Extrusion20" cut sketch "Sketch21" against normal through all
sketch "Sketch22" plane through (0, 6, 0) normal (0, 1, 0) x (1, 0, 0)
  line L0 (0, 0) -> (0, -3.85)
  circle A0 centre (0, 0) radius 3.85 projected
  line L1 (0, -3.85) -> (3.85, -3.85)
  line L2 (3.85, -3.85) -> (-3.85, -3.85)
  line L3 (-3.85, -3.85) -> (-3.85, 3.85)
  line L4 (-3.85, 3.85) -> (3.85, 3.85)
  line L5 (3.85, 3.85) -> (3.85, -3.85)
extrude "Extrusion21" cut sketch "Sketch22" against normal through all contours A0
sketch "Sketch23" plane through (79.7, 5, 0) normal (0, 1, 0) x (1, 0, 0)
  arc A0 (-76.1542, -1.5) -> (-76.1542, 1.5) centre (-79.7, 0) ccw projected
  line L0 (-75.85, 0) -> (-77.9753, 0)
  line L1 (-77.9753, 0) -> (-77.9753, 3.5992)
  line L2 (-77.9753, 3.5992) -> (-75.85, 3.5992)
  line L3 (-75.85, 3.5992) -> (-75.85, 0)
  line L4 (-75.85, 0) -> (-77.9753, 0)
  line L5 (-77.9753, 0) -> (-77.9753, -3.4561)
  line L6 (-77.9753, -3.4561) -> (-75.85, -3.4561)
  line L7 (-75.85, -3.4561) -> (-75.85, 0)
  line L8 (-75.85, -3.4561) -> (-65.85, -3.4561)
  line L9 (-65.85, -3.4561) -> (-65.85, 3.5992)
  line L10 (-65.85, 3.5992) -> (-75.85, 3.5992)
  line L11 (-75.85, 3.5992) -> (-75.85, -3.4561)
  dimension "d57" = 10
extrude "Extrusion22" cut sketch "Sketch23" against normal through all contours L3 L10 L9 L8 L7
extrude "Extrusion23" cut sketch "Sketch23" against normal through all contours L7 L6 L5 L0
extrude "Extrusion24" cut sketch "Sketch23" against normal through all contours L0 L1 L2 L3
sketch "Sketch24" plane through (13.85, 5, -1.5) normal (-1, 0, 0) x (0, 0, 1)
  line L0 (-2.9013, -5) -> (5.7799, -5)
  line L1 (5.7799, -5) -> (5.7799, 1.344)
  line L2 (5.7799, 1.344) -> (-2.9013, 1.344)
  line L3 (-2.9013, 1.344) -> (-2.9013, -5)
  point P0 (1.5, -5)
extrude "Extrusion25" cut sketch "Sketch24" against normal blind 6.142
sketch "Sketch25" plane through (19.992, 5, -1.5) normal (-1, 0, 0) x (0, 0, 1)
  line L0 (-1.5, 0) -> (4.5, 0)
  line L1 (4.5, 0) -> (4.5, -4)
  line L2 (4.5, -4) -> (-1.5, -4)
  line L3 (-1.5, -4) -> (-1.5, 0)
  point P0 (1.5, -5)
  dimension "d66" = 6
  dimension "d67" = 4
extrude "Extrusion26" add sketch "Sketch25" along normal blind 6.133
sketch "Sketch26" plane through (79.7, 6, 0) normal (0, 1, 0) x (1, 0, 0)
  line L0 (-65.841, -3) -> (-65.841, 3) projected
  line L1 (-65.841, 0) -> (-69.691, 0)
  circle A0 centre (-69.691, 0) radius 3.85
  point P0 (-79.7, 0)
  dimension "d70" = 3.85
extrude "Extrusion27" add sketch "Sketch26" against normal blind 6
sketch "Sketch27" plane through (13.859, 5, -1.5) normal (-1, 0, 0) x (0, 0, 1)
  point P0 (1.5, -5)
sketch "Sketch28" plane through (13.859, 5, -1.5) normal (-1, 0, 0) x (0, 0, 1)
  line L0 (-1.5, 0) -> (-1.5, -4) projected
  line L1 (4.5, 0) -> (3, 0) projected
  line L2 (-1.5, -4) -> (4.5, -4)
  line L3 (4.5, -4) -> (4.5, 0)
  line L4 (4.5, 0) -> (-1.5, 0)
  line L5 (-1.5, 0) -> (-1.5, -4)
  point P0 (1.5, -5)
extrude "Extrusion28" add sketch "Sketch28" along normal blind 5
sketch "Sketch29" plane through (19.992, 3.5, 3) normal (0, 0, 1) x (1, 0, 0)
  point P0 (-19.992, -3.5)
sketch "Sketch30" plane through (79.7, 5, 0) normal (0, 1, 0) x (1, 0, 0)
  point P0 (-79.7, 0)
sketch "Sketch31" plane through (19.992, 5, -1.5) normal (1, 0, 0) x (0, 0, -1)
  arc A0 (-3, 0) -> (-4.5, -1.5) centre (-3, -1.5) ccw projected
  circle A1 centre (-3, -1.5) radius 1.5
  circle A2 centre (-3, -1.5) radius 1.5
  arc A3 (-4.5, -2.5) -> (-3, -4) centre (-3, -2.5) ccw projected
  circle A4 centre (-3, -2.5) radius 1.5
  arc A5 (0, -4) -> (1.5, -2.5) centre (0, -2.5) ccw projected
  circle A6 centre (0, -2.5) radius 1.5
  arc A7 (1.5, -1.5) -> (0, 0) centre (0, -1.5) ccw projected
  circle A8 centre (0, -1.5) radius 1.5
  line L0 (-4.5, -1.5) -> (-4.5, 0) projected
  line L1 (-4.5, 0) -> (-3, 0)
  line L2 (-3, 0) -> (-3, -1.5)
  line L3 (-3, -1.5) -> (-4.5, -1.5)
  line L4 (-4.5, -1.5) -> (-4.5, 0)
  line L5 (0, 0) -> (1.5, 0)
  line L6 (1.5, 0) -> (1.5, -1.5)
  line L7 (1.5, -1.5) -> (0, -1.5)
  line L8 (0, -1.5) -> (0, 0)
  line L9 (-3, -4) -> (-4.5, -4)
  line L10 (-4.5, -4) -> (-4.5, -2.5)
  line L11 (-4.5, -2.5) -> (-3, -2.5)
  line L12 (-3, -2.5) -> (-3, -4)
  line L13 (0, -4) -> (1.5, -4)
  line L14 (1.5, -4) -> (1.5, -2.5)
  line L15 (1.5, -2.5) -> (0, -2.5)
  line L16 (0, -2.5) -> (0, -4)
  point P0 (-1.5, -5)
extrude "Extrusion29" cut sketch "Sketch31" against normal blind 10 contours A0 L0 L1
extrude "Extrusion30" cut sketch "Sketch31" against normal blind 10 contours A3 L9 L10
extrude "Extrusion31" cut sketch "Sketch31" against normal blind 10 contours A5 L14 L13
extrude "Extrusion32" cut sketch "Sketch31" against normal blind 10 contours L5 L6 A7
sketch "Sketch32" plane through (79.7, 6, 0) normal (0, 1, 0) x (1, 0, 0)
  point P0 (-79.7, 0)
sketch "Sketch33" plane through (10.009, 6, 0) normal (0, 1, 0) x (1, 0, 0)
  circle A0 centre (0, 0) radius 3.85
  point P0 (-10.009, 0)
extrude "Extrusion33" add sketch "Sketch33" against normal blind 6
sketch "Sketch34" plane through (10.009, 6, 0) normal (0, 1, 0) x (1, 0, 0)
  circle A0 centre (0, 0) radius 1.925
  point P0 (-10.009, 0)
  dimension "d85" = 3.85
extrude "Extrusion34" cut sketch "Sketch34" against normal blind 6
sketch "Sketch35" plane through (10.009, 6, 0) normal (0, 1, 0) x (1, 0, 0)
  point P0 (-10.009, 0)
sketch "Sketch36" plane through (79.7, 6, 0) normal (0, 1, 0) x (1, 0, 0)
  point P0 (-79.7, 0)
sketch "Sketch37" plane through (79.7, 6, 0) normal (0, 1, 0) x (1, 0, 0)
  point P0 (-79.7, 0)
sketch "Sketch38" plane through (10.009, 6, 0) normal (0, 1, 0) x (1, 0, 0)
  circle A0 centre (0, 0) radius 1.95
  point P0 (-10.009, 0)
  dimension "d89" = 3.9
extrude "Extrusion35" cut sketch "Sketch38" against normal blind 6
sketch "Sketch39" plane through (79.7, 6, 0) normal (0, 1, 0) x (1, 0, 0)
  point P0 (-79.7, 0)
sketch "Sketch40" plane through (79.7, 6, 0) normal (0, 1, 0) x (1, 0, 0)
  point P0 (-79.7, 0)
sketch "Sketch41" plane through (79.7, 6, 0) normal (0, 1, 0) x (1, 0, 0)
  point P0 (-79.7, 0)
properties part number "Part3_3DPrint"
